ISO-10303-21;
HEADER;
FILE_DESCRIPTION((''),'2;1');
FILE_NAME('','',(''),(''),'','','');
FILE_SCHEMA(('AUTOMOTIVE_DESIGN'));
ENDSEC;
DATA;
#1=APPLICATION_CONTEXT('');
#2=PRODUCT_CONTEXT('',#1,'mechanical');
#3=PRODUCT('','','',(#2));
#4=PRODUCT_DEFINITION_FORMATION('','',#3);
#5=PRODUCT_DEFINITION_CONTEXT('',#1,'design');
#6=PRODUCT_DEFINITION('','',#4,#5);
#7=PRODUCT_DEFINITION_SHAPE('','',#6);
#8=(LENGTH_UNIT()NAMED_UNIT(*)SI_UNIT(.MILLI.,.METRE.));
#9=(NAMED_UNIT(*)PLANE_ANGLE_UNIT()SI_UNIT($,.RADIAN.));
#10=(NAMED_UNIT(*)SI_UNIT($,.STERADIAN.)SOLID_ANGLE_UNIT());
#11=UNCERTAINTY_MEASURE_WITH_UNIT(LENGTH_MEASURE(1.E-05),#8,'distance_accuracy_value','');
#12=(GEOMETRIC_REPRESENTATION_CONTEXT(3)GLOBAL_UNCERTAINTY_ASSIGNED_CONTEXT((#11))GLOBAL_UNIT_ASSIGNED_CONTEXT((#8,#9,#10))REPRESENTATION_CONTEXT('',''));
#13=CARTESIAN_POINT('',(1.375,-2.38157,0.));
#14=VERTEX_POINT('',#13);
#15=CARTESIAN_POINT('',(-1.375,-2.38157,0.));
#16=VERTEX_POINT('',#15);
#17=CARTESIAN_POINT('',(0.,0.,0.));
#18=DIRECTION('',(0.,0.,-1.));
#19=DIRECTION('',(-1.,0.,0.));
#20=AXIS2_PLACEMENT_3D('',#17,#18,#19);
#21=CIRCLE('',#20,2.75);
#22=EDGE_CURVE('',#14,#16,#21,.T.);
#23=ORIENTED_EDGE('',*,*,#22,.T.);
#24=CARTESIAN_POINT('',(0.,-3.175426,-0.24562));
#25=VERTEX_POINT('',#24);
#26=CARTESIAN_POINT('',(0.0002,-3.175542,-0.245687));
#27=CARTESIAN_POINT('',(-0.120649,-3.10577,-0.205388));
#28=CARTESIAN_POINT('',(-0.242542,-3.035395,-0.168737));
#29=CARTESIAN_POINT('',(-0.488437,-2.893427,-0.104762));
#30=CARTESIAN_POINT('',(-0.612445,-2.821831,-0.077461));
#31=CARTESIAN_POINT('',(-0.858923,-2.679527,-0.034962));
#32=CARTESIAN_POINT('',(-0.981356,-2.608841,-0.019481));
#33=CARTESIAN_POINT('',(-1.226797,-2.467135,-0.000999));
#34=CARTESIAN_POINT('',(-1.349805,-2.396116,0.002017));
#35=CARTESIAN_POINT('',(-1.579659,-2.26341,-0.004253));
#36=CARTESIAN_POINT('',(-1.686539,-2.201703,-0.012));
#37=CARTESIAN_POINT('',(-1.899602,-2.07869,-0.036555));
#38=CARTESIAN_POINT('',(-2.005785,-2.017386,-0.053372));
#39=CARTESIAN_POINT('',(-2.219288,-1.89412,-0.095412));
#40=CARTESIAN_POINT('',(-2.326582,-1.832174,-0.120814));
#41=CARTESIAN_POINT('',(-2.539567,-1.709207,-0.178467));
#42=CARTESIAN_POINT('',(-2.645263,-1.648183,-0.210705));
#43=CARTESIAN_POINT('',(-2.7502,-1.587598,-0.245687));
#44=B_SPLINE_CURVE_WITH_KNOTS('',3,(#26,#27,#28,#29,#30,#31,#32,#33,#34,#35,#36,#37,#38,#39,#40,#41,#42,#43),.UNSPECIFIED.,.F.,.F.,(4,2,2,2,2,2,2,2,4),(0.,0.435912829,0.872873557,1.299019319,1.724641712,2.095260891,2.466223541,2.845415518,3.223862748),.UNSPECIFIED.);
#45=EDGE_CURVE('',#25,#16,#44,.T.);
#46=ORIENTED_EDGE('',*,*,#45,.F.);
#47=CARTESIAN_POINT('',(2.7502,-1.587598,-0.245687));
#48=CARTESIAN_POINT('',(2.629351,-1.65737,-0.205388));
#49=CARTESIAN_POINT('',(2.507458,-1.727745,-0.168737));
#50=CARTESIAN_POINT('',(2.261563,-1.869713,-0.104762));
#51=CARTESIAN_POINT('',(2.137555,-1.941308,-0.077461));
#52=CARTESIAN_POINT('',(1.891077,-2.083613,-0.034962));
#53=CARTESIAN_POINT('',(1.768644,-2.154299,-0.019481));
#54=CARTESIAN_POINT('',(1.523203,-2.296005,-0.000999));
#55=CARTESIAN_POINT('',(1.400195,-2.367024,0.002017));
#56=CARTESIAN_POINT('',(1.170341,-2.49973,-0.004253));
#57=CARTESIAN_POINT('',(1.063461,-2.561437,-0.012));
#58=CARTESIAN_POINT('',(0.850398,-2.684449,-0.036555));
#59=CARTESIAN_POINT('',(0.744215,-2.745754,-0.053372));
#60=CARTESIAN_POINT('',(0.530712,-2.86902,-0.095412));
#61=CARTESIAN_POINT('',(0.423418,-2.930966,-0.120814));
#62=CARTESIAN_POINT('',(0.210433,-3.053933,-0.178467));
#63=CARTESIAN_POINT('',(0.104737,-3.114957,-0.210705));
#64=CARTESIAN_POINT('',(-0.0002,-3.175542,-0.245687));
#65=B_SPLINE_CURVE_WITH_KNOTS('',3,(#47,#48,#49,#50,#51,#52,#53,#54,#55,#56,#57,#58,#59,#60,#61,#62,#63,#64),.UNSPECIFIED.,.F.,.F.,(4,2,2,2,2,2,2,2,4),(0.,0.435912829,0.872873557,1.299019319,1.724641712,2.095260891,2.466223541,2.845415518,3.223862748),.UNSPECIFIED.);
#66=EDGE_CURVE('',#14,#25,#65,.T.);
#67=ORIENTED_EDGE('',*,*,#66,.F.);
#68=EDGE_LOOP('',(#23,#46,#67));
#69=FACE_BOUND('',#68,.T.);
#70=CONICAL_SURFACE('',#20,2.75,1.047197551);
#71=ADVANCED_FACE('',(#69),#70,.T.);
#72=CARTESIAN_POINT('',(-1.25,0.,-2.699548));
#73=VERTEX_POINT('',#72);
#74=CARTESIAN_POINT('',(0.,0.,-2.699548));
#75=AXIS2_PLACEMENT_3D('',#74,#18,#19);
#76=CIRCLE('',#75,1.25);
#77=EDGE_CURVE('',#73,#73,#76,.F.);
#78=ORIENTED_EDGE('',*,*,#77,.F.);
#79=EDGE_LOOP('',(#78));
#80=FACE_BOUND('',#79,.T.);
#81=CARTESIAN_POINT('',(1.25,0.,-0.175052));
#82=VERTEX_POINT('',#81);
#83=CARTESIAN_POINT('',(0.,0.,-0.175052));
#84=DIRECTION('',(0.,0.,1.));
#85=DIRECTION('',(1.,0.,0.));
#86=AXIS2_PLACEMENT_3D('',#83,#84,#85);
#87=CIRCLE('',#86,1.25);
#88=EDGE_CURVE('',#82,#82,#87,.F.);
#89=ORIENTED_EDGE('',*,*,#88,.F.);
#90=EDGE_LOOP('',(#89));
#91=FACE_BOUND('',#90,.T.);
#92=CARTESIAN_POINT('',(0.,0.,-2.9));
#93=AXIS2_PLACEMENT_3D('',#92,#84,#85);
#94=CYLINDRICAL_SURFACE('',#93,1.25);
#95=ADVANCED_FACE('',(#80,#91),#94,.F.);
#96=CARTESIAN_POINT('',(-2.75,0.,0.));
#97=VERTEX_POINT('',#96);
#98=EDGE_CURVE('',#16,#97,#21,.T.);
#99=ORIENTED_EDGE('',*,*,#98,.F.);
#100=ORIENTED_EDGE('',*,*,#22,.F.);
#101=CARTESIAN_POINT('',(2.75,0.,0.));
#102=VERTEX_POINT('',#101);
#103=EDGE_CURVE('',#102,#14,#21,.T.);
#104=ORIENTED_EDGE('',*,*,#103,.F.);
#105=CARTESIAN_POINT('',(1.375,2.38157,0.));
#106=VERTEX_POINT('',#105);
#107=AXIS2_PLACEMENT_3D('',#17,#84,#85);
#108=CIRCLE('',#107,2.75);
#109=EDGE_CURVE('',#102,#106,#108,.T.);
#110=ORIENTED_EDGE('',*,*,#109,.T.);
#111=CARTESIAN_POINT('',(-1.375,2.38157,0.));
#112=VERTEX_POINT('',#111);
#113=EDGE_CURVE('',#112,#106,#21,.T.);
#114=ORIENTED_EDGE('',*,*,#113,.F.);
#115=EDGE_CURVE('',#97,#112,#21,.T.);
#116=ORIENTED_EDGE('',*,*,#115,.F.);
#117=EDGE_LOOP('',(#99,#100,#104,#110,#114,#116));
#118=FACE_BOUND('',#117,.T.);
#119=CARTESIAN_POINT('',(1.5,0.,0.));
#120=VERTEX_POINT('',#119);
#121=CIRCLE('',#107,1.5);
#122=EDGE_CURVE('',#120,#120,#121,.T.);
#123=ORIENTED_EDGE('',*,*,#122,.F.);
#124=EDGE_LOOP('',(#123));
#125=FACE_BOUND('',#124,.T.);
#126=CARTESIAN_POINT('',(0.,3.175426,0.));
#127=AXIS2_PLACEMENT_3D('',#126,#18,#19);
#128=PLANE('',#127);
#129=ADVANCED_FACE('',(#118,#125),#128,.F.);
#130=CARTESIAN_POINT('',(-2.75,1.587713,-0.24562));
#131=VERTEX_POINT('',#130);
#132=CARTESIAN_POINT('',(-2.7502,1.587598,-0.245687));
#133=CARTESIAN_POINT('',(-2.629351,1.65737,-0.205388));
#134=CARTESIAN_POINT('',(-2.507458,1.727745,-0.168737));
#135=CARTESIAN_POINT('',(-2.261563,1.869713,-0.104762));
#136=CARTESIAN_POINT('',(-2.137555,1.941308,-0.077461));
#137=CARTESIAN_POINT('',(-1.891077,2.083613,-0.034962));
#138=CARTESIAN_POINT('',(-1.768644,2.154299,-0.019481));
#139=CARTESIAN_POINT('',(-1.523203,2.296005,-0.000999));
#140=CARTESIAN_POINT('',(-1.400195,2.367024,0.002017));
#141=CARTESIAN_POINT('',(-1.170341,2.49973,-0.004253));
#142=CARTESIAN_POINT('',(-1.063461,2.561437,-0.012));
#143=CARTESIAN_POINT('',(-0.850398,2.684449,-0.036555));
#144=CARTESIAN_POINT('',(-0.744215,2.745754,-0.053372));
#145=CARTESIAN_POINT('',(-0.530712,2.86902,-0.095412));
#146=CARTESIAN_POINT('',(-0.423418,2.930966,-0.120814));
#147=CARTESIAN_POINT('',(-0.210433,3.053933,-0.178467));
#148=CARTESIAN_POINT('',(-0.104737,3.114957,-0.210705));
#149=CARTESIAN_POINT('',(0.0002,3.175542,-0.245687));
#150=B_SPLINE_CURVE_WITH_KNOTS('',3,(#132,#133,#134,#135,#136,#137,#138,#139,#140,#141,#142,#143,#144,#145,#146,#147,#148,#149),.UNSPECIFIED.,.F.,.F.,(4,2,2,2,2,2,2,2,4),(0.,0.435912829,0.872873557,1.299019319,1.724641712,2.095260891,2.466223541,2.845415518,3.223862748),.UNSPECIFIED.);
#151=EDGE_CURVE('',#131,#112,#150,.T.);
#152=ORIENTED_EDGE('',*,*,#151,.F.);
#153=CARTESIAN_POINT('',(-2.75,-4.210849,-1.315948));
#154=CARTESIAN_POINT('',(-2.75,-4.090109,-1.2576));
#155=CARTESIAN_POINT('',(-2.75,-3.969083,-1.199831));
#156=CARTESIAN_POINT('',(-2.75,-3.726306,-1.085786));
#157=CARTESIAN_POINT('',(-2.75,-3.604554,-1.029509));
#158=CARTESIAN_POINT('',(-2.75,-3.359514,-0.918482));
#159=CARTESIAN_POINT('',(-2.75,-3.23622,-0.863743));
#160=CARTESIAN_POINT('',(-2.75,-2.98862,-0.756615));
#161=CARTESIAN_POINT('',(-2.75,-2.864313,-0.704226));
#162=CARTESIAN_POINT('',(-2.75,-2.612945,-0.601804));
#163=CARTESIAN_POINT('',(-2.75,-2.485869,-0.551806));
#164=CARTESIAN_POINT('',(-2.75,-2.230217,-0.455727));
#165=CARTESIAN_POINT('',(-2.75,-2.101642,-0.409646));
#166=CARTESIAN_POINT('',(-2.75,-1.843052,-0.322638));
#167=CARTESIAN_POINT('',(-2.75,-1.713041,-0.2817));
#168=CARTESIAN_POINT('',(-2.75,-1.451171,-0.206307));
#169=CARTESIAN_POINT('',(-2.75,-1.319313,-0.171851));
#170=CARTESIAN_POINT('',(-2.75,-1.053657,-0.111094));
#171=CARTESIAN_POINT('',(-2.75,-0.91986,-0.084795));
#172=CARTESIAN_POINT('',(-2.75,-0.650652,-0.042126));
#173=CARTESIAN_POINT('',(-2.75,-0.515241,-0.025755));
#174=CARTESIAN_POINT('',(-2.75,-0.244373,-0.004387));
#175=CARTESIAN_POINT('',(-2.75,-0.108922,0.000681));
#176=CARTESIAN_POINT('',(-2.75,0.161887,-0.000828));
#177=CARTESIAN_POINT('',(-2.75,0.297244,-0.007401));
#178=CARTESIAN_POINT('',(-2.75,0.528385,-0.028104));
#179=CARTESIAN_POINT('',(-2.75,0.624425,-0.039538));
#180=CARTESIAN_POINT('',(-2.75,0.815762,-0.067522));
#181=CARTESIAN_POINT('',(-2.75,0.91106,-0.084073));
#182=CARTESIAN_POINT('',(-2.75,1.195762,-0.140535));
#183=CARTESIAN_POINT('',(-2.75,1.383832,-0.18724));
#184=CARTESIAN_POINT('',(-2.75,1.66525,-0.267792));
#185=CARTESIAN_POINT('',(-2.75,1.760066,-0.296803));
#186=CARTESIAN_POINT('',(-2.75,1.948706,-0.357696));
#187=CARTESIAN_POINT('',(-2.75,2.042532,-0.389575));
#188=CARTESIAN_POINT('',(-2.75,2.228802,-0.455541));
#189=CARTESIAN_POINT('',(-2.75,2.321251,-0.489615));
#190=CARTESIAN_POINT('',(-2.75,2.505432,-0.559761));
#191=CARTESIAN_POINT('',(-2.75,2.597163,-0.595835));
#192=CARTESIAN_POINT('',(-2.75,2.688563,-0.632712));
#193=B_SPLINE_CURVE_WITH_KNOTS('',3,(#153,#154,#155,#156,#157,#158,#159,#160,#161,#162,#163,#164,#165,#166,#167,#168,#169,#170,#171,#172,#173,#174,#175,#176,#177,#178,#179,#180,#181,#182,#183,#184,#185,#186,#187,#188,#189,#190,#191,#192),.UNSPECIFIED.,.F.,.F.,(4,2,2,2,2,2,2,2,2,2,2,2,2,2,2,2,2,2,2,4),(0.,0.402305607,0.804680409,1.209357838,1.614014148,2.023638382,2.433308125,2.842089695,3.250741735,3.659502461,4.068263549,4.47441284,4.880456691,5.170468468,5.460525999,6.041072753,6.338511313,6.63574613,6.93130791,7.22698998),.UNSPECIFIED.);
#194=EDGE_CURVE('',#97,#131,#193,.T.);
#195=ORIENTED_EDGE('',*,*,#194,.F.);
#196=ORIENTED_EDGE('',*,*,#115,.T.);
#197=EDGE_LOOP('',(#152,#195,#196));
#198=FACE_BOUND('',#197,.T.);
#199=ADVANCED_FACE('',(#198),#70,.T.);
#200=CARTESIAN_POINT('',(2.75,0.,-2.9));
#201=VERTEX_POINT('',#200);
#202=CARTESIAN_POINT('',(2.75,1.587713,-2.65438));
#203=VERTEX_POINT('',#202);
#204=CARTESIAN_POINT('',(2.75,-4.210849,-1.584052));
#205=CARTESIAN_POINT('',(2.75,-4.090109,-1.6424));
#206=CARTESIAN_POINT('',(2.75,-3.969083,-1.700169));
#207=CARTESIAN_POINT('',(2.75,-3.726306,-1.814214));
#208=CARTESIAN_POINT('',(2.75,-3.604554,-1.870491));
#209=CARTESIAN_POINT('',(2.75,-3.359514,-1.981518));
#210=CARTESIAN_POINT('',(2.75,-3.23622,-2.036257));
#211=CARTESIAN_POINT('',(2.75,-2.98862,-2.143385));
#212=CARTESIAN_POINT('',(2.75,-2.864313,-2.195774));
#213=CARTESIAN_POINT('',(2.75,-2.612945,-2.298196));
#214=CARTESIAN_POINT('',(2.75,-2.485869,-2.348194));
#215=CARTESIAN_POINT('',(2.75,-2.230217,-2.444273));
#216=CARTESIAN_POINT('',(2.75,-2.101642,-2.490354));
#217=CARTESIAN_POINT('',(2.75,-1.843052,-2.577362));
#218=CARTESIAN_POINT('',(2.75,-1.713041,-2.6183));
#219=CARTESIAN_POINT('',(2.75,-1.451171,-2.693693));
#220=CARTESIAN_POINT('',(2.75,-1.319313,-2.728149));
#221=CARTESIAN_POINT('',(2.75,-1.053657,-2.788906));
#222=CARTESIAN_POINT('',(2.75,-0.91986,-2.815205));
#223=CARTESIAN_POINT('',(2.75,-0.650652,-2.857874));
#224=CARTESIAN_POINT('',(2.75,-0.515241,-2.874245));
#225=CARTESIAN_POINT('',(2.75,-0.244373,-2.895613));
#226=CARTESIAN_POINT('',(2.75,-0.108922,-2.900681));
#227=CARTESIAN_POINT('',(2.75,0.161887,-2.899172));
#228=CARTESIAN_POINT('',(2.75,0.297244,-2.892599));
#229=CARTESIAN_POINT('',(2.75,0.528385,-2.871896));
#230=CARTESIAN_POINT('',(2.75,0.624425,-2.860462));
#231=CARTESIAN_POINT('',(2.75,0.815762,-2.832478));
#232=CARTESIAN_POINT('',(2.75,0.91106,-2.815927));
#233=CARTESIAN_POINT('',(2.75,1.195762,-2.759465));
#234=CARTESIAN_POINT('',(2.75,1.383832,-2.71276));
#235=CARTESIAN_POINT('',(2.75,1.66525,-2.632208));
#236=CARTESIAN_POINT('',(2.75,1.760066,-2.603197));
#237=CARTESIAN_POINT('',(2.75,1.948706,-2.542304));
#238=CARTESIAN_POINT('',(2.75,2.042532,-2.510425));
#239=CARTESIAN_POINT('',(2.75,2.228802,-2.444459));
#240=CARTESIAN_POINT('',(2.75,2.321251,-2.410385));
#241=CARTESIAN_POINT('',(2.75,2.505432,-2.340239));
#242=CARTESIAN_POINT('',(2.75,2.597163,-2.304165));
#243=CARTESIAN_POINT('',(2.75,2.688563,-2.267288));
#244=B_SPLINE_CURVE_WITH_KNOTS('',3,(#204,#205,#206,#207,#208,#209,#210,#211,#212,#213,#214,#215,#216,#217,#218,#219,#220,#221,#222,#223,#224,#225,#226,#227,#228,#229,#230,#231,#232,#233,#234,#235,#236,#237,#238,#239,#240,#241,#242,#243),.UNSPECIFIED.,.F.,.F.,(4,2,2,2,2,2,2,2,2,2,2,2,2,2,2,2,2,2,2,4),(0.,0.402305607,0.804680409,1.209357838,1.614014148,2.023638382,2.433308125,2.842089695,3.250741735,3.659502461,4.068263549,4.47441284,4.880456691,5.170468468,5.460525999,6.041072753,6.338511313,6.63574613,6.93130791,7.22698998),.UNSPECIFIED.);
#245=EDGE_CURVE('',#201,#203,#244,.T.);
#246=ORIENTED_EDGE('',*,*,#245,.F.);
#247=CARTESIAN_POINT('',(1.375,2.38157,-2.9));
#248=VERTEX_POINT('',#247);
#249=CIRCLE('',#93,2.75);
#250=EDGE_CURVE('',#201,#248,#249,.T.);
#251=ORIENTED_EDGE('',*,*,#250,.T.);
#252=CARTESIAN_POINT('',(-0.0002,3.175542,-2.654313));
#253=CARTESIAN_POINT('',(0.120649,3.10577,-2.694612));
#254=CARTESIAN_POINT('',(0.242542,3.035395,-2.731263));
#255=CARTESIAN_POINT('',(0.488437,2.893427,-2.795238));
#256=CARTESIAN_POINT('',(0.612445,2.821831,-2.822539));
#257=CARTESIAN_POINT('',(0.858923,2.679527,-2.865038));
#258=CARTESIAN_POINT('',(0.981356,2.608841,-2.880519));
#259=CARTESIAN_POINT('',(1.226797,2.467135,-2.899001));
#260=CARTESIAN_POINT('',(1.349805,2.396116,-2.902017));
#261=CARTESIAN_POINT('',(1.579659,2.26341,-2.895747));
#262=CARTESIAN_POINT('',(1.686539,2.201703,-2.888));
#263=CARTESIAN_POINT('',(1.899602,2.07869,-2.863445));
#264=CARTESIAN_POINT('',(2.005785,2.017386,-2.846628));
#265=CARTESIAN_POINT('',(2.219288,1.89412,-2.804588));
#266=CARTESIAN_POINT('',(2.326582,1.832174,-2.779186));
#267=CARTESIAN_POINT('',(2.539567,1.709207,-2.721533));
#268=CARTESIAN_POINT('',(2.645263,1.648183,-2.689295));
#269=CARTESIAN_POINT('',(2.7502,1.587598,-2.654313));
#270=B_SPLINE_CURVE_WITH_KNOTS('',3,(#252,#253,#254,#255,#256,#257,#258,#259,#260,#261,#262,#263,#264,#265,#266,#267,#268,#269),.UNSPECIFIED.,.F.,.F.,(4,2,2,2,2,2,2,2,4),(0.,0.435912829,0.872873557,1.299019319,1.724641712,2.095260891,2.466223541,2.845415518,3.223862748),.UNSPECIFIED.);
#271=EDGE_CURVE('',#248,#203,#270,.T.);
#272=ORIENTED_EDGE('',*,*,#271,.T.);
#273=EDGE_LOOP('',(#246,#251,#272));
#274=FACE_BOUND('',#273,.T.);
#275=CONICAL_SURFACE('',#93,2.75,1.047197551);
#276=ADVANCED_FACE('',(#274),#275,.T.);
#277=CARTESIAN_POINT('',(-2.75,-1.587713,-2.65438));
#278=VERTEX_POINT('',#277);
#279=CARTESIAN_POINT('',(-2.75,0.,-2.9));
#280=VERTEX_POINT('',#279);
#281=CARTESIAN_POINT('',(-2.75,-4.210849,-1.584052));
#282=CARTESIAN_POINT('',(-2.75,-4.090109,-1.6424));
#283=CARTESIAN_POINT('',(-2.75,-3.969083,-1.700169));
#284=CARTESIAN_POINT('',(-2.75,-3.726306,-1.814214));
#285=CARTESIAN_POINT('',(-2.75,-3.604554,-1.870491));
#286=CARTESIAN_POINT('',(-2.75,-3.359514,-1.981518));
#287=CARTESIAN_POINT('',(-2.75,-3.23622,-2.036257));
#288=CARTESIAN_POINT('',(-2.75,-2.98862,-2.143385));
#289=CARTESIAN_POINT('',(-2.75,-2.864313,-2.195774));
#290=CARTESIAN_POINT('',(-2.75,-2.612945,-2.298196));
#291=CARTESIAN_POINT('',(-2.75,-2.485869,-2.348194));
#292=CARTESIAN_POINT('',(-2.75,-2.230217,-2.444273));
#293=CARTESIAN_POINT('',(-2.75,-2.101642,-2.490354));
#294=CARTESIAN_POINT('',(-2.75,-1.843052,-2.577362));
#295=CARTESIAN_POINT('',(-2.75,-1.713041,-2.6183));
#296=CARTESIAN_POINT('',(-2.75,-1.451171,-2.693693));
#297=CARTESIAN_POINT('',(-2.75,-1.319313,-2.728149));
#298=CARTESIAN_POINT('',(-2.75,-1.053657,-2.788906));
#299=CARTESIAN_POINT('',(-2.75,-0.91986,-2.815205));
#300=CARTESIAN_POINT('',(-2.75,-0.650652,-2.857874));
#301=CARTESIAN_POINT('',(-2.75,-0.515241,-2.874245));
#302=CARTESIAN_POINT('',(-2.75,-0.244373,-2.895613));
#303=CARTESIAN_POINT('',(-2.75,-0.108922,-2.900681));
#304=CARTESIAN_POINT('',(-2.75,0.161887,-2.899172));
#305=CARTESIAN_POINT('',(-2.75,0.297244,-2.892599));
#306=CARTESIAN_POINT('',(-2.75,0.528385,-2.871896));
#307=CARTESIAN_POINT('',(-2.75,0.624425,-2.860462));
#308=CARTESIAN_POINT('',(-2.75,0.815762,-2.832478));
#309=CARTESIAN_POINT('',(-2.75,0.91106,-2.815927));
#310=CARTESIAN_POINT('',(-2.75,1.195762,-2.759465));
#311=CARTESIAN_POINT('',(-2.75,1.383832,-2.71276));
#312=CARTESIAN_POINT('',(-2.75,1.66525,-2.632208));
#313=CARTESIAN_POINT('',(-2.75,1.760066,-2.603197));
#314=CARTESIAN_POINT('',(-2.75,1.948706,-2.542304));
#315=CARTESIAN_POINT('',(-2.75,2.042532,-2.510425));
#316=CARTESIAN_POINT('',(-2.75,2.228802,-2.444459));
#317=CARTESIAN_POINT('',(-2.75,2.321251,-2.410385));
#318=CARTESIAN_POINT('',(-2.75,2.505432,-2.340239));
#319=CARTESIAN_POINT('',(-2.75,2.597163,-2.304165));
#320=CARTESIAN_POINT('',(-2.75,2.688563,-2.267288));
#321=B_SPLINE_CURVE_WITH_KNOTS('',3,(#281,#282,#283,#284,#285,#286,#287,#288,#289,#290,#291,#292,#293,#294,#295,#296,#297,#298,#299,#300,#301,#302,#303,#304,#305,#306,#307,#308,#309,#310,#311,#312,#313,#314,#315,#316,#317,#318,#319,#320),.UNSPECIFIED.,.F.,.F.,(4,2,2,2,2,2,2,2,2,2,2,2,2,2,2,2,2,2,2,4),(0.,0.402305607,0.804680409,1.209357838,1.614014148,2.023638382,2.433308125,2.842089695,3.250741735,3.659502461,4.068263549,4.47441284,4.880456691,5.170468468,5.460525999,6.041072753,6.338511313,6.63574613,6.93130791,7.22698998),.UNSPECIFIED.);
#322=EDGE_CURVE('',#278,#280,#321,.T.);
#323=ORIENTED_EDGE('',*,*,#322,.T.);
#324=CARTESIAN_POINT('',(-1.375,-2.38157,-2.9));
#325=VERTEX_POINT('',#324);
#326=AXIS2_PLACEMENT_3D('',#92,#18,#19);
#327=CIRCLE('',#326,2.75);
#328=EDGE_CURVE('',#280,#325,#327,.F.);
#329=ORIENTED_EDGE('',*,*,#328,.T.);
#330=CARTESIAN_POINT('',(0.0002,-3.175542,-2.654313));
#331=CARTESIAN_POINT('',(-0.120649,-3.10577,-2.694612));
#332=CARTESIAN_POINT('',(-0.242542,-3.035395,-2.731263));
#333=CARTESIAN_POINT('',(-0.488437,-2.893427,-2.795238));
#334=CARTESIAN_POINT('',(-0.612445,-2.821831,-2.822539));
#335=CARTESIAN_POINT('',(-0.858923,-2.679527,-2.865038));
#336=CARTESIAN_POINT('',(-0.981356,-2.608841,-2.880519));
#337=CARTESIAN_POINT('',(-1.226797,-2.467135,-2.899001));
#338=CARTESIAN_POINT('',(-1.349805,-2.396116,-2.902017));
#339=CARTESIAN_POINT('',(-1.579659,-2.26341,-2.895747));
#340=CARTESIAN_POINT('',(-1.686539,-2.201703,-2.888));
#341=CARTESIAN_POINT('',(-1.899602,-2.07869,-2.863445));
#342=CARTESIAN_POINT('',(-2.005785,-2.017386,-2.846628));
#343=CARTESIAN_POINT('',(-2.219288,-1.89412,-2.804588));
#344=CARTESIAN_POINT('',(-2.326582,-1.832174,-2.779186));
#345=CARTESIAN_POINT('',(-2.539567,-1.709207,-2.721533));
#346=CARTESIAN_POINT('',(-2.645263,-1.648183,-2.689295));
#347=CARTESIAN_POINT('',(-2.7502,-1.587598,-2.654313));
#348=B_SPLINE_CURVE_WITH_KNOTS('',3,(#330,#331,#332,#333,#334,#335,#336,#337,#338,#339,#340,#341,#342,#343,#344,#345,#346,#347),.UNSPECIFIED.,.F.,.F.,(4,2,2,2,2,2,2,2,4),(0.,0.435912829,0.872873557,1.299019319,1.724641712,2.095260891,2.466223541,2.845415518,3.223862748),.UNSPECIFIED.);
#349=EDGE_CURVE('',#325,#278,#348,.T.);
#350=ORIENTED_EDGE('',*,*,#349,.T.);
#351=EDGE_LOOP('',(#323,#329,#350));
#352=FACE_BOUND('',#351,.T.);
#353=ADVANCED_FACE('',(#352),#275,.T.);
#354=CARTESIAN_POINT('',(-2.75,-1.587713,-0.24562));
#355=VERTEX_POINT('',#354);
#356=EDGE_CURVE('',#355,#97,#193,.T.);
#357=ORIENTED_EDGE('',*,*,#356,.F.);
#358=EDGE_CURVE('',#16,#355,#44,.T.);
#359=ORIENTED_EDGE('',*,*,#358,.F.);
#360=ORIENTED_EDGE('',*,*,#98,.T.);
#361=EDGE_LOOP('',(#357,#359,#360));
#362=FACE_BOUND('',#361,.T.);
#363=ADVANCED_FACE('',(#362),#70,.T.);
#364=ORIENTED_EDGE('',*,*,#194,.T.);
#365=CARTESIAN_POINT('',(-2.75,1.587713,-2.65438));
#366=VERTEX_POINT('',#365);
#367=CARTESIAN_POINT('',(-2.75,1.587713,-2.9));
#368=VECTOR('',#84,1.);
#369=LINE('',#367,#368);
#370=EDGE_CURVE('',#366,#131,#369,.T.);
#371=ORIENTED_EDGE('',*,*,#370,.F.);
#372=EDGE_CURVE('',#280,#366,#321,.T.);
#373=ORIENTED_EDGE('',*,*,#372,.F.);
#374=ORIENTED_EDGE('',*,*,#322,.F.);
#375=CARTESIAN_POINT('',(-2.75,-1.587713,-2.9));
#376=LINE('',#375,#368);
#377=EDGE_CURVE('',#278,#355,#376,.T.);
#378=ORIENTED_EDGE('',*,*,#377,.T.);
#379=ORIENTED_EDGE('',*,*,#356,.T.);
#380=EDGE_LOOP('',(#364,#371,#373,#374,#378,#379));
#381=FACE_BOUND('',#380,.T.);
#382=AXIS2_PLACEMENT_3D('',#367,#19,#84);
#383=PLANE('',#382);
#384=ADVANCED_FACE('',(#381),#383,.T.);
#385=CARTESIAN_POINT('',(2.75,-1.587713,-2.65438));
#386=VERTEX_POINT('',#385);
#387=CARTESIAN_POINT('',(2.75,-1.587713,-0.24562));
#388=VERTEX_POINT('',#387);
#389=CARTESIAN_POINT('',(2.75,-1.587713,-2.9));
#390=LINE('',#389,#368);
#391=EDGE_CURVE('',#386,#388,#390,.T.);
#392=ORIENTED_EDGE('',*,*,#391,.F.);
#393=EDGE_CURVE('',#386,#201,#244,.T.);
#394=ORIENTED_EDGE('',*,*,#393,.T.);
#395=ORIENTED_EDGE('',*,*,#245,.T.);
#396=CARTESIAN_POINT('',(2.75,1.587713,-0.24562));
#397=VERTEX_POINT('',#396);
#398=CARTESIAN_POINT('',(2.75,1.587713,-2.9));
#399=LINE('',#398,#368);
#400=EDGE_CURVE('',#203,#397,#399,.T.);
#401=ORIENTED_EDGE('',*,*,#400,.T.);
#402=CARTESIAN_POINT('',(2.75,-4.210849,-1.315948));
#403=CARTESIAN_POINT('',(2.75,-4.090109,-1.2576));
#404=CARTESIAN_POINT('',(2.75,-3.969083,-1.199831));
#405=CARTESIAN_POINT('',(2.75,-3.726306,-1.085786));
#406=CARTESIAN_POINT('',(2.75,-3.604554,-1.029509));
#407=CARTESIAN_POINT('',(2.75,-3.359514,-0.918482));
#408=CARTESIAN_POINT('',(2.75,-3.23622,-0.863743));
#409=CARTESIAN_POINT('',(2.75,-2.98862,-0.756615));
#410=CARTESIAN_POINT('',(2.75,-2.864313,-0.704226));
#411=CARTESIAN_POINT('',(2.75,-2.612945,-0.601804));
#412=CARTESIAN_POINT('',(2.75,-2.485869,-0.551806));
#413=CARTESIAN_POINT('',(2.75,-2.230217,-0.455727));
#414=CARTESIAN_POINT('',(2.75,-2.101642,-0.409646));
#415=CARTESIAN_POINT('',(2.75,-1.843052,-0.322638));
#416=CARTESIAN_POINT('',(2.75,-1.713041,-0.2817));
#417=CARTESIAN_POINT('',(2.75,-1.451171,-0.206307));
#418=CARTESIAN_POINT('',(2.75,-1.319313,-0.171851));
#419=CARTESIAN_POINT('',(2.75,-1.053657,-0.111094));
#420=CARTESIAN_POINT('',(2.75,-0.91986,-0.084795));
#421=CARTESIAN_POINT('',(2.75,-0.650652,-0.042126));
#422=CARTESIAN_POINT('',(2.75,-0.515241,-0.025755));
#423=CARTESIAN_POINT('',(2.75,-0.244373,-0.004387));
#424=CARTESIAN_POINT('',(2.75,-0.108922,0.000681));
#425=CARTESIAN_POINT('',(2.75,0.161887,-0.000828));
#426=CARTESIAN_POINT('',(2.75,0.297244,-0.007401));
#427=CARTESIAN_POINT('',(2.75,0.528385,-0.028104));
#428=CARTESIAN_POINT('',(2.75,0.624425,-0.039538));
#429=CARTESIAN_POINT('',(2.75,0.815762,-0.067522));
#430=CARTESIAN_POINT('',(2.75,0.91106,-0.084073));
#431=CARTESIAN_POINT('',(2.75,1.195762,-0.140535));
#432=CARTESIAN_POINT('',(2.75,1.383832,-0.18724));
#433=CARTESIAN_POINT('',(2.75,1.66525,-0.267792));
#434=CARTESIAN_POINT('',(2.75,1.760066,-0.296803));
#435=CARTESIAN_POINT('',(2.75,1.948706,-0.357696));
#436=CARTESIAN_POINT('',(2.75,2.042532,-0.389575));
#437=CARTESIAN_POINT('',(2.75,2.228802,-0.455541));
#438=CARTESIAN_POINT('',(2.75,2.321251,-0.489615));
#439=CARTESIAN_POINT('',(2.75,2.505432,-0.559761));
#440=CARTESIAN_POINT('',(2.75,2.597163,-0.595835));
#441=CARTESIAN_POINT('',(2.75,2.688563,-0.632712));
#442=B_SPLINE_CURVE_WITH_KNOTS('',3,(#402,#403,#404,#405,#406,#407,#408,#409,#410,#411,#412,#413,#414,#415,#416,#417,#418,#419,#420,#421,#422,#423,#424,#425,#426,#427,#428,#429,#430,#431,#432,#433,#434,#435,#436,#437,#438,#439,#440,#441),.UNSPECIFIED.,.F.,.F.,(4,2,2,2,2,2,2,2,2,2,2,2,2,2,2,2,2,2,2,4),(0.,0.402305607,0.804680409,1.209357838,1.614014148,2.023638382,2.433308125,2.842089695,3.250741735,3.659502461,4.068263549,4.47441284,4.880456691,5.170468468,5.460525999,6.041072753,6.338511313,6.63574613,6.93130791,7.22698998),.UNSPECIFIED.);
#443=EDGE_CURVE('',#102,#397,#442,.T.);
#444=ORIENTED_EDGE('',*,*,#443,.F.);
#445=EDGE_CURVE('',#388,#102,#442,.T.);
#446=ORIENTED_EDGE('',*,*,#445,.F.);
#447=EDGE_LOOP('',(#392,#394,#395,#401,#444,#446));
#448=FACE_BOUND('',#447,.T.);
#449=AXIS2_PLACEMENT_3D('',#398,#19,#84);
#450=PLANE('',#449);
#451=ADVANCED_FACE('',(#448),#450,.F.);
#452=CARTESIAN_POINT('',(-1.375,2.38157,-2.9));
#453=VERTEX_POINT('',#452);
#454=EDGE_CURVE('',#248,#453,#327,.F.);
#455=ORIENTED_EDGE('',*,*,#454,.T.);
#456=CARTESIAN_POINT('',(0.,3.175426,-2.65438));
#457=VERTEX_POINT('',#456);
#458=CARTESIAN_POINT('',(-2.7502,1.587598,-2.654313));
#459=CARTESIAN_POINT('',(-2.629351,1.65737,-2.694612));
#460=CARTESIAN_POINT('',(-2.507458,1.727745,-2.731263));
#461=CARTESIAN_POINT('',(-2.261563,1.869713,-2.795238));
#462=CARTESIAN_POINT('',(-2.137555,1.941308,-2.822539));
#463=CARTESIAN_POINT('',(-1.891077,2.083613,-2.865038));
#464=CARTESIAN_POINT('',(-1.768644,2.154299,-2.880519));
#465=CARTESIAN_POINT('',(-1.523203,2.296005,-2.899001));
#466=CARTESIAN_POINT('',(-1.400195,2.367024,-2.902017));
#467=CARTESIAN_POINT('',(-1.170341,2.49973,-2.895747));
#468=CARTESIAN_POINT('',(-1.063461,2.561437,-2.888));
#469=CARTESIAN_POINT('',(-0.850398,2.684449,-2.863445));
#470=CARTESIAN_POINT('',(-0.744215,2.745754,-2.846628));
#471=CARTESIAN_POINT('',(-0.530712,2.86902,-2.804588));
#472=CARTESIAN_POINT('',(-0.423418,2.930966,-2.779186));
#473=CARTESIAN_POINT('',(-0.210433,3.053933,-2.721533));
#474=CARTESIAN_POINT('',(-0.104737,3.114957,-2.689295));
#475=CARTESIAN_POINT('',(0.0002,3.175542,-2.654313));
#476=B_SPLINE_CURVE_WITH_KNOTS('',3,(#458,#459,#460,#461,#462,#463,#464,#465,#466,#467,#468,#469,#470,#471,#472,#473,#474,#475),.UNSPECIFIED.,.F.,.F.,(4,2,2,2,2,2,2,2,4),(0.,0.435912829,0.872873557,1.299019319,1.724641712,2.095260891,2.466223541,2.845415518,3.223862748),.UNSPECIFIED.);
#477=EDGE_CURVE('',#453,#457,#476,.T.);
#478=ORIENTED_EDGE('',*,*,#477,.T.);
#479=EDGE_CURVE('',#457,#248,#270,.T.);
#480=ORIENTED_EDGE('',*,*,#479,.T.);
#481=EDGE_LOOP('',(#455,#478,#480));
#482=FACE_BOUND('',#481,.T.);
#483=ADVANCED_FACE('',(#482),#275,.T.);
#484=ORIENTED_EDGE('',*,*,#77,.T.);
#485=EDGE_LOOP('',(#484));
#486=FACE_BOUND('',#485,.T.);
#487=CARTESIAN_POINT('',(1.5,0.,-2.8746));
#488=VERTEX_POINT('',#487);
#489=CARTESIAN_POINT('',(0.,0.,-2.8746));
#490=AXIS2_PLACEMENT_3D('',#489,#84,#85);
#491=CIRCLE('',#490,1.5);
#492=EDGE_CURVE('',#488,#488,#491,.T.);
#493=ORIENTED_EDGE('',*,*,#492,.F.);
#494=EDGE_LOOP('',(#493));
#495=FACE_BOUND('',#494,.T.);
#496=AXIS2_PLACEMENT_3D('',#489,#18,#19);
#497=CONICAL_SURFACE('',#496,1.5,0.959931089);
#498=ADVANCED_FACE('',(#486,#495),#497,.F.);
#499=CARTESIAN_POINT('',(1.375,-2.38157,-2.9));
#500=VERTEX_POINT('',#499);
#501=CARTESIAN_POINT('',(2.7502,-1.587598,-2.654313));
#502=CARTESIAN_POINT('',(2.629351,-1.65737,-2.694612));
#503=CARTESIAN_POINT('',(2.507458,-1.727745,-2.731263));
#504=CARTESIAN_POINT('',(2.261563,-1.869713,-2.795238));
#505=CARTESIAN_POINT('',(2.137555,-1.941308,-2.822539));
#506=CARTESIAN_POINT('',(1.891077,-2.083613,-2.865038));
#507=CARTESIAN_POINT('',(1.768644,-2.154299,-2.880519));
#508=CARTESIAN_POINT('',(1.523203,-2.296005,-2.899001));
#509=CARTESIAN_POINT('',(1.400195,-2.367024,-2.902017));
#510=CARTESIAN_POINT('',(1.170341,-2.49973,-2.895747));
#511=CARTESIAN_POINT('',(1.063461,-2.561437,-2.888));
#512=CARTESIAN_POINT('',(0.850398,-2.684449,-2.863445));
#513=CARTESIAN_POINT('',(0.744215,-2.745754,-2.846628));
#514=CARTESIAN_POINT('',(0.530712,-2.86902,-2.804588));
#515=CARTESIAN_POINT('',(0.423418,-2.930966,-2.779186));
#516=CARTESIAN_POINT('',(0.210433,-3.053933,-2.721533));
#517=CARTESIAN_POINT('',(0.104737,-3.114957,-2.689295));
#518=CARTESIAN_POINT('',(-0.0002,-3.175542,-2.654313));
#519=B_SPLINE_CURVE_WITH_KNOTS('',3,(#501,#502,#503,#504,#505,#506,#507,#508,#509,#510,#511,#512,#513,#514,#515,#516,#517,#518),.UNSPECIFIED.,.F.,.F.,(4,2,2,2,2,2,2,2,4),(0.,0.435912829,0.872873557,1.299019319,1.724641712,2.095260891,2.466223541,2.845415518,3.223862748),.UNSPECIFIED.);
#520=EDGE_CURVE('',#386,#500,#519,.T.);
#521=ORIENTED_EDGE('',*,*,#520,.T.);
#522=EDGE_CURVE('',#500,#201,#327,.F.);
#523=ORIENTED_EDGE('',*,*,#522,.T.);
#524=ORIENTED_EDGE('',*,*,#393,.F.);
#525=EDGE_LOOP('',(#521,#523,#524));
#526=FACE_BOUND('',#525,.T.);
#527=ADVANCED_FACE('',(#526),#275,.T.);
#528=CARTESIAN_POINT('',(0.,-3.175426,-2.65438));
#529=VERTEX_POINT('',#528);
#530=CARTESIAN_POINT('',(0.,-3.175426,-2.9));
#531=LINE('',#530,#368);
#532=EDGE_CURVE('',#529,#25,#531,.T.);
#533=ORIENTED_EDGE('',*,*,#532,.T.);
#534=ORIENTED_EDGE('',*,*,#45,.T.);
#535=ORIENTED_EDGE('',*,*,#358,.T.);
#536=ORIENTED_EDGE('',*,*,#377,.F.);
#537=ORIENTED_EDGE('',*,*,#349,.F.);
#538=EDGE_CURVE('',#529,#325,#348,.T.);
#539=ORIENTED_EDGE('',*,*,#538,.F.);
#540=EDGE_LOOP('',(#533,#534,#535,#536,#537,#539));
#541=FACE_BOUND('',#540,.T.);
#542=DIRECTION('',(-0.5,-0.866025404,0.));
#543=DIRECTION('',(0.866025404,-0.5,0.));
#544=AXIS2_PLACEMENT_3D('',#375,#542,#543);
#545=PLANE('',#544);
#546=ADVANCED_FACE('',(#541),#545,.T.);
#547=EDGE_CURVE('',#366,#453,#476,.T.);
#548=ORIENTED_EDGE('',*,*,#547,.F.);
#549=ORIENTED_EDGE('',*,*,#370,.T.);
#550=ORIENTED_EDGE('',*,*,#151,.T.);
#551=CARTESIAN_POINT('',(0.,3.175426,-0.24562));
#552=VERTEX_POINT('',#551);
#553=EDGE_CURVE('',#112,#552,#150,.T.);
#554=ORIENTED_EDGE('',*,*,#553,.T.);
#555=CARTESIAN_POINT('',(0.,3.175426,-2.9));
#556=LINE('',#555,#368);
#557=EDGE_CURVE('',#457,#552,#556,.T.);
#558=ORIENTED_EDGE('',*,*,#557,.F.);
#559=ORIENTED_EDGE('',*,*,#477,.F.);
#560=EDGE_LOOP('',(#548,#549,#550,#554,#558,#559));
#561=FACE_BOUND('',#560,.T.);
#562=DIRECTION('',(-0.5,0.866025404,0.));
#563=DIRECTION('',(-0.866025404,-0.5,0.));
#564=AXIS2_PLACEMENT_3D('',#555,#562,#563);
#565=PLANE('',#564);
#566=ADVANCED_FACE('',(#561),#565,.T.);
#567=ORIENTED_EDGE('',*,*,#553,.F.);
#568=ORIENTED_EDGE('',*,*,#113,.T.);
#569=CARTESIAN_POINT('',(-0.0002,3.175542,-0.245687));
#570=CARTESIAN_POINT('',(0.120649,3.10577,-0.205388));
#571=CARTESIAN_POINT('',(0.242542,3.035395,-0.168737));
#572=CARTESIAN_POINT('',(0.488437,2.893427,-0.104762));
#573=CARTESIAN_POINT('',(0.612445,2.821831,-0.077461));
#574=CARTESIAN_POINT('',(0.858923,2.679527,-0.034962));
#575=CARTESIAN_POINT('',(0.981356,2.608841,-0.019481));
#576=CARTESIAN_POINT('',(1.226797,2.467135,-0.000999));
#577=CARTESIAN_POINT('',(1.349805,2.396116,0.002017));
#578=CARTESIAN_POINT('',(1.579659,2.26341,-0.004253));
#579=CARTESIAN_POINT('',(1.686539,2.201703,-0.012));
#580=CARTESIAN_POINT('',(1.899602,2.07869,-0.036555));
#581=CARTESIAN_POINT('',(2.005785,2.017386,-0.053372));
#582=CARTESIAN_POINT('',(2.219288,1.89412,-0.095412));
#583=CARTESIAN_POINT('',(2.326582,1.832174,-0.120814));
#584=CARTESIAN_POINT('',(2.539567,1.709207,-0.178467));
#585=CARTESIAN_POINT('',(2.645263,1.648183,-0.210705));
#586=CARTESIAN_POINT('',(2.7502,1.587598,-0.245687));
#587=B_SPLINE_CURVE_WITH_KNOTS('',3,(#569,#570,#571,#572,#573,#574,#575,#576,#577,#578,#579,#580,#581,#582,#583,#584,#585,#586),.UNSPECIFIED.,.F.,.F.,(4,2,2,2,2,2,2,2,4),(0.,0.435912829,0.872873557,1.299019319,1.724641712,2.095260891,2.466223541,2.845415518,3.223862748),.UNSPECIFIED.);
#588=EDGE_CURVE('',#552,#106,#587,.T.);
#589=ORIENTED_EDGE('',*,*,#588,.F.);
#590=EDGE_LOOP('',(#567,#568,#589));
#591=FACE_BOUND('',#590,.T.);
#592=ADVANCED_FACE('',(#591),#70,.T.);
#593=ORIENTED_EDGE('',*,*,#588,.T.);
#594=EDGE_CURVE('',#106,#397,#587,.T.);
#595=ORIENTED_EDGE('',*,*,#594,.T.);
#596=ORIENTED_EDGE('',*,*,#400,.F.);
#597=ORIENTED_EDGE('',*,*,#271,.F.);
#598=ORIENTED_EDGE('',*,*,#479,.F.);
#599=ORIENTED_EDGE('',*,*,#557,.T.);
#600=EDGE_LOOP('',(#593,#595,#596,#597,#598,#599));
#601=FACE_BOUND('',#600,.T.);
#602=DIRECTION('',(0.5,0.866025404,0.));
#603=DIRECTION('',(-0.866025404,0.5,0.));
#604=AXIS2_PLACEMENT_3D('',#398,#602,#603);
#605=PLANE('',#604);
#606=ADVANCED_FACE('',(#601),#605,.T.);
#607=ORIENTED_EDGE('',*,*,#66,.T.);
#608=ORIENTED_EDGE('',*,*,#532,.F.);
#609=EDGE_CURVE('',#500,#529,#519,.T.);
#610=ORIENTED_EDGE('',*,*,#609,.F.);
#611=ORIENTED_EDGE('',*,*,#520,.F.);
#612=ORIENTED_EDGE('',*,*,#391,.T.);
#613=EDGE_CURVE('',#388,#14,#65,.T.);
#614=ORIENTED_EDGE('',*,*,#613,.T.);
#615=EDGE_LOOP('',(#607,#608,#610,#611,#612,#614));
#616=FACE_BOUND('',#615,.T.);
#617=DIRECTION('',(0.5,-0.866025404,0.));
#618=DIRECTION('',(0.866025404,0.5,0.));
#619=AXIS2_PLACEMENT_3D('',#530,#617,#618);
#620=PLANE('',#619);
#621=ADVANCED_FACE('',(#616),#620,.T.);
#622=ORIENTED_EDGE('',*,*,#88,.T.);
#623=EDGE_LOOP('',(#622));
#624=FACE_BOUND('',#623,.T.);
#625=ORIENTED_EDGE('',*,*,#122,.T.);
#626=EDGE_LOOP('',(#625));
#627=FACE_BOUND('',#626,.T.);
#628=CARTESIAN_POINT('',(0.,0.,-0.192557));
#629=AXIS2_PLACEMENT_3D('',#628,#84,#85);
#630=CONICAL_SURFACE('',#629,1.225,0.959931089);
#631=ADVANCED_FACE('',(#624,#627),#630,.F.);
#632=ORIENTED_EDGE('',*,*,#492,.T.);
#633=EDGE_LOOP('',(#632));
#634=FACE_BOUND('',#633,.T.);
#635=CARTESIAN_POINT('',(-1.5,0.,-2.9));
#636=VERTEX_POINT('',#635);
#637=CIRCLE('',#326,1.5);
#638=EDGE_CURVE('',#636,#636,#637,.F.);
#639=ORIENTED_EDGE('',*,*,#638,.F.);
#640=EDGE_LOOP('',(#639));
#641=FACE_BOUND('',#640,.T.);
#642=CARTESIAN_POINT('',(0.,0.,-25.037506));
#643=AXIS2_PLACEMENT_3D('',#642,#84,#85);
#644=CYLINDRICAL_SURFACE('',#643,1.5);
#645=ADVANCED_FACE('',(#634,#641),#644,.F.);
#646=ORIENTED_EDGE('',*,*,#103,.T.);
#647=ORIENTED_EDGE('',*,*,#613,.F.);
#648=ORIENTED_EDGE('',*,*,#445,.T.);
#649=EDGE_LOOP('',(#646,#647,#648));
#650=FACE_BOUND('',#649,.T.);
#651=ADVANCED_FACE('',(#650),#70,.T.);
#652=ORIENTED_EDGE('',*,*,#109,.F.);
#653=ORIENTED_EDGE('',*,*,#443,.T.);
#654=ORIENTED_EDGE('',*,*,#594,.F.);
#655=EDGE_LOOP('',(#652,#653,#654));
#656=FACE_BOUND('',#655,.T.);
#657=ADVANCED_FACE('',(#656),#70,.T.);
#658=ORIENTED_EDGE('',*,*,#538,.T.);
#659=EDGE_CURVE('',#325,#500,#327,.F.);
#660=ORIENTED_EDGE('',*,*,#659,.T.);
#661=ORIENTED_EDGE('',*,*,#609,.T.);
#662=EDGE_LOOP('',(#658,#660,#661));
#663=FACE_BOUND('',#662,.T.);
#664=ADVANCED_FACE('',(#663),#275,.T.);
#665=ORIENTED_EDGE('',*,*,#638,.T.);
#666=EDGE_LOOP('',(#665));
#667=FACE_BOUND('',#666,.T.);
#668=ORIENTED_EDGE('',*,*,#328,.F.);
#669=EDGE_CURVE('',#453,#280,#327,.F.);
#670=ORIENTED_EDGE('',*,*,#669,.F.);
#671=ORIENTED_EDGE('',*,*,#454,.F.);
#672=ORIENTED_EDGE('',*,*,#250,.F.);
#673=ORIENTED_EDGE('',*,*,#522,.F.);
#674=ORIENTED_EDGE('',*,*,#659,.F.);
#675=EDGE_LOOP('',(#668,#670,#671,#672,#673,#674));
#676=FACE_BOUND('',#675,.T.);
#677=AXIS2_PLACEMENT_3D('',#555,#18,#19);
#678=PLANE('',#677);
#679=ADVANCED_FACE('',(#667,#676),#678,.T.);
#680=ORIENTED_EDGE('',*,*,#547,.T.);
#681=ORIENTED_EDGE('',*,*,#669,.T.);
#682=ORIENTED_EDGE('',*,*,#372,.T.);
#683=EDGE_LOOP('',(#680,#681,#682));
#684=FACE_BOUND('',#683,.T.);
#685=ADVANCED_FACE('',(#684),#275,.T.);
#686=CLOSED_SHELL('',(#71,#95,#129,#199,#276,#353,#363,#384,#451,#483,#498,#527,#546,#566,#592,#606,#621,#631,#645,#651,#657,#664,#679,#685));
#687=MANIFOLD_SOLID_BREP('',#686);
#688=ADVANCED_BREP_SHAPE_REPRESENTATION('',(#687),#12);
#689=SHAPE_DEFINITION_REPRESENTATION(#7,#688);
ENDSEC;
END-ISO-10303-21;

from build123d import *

# Parameters (mm, degrees)
BASENUT_START = -2.9
BASENUTSKE_R  = 1.25
BASENUT_DEPTH = 2.9


# Read off the part's stored shape, not the designer's step: ThreadSchematic
with BuildPart() as part:
    # BaseNutSke → BaseNut (new body)
    with BuildSketch(Plane.XY.offset(BASENUT_START)):
        Polygon((2.75, 1.58771324), (2.75, -1.58771324), (0, -3.175426481), (-2.75, -1.58771324), (-2.75, 1.58771324), (0, 3.175426481), align=None)
        Circle(BASENUTSKE_R, mode=Mode.SUBTRACT)
    extrude(amount=BASENUT_DEPTH)

    # Sketch5 (on Front Plane) → EndChamfer (revolve, cut)
    with BuildSketch(Plane.XY):
        Polygon((2.8746, 1.5), (2.682042927, 1.225), (2.9254, 1.225), (2.9254, 1.5), align=None)
    revolve(axis=Axis((2.9254, 1.225, 0), (-1, 0, 0)), mode=Mode.SUBTRACT)

    # Sketch3 → Double-Chamfer (revolve, cut)
    with BuildSketch(Plane(origin=(0, 0, 0), x_dir=(0, 0, -1), z_dir=(1, 0, 0))):
        Polygon((2.9, 2.75), (2.654379907, 3.175426481), (2.654379907, 13.175426481), (12.9, 13.175426481), (12.9, 2.75), align=None)
        Polygon((0.245620093, 13.175426481), (-10, 13.175426481), (-10, 2.75), (0, 2.75), (0.245620093, 3.175426481), align=None)
    revolve(axis=Axis((0, 0, 0), (0, 0, -1)), mode=Mode.SUBTRACT)

    # ThreadSchematic outline → ThreadSchematic (revolve, cut)
    with BuildSketch(Plane.XZ):
        Polygon((1.25, 0), (1.25, -0.175051885), (1.5, 0), align=None)
        Polygon((1.5, -2.8746), (1.25, -2.699548115), (1.25, -2.9), (1.5, -2.9), align=None)
    revolve(axis=Axis((0, 0, 0), (0, 0, 1)), mode=Mode.SUBTRACT)


solid = part.part
